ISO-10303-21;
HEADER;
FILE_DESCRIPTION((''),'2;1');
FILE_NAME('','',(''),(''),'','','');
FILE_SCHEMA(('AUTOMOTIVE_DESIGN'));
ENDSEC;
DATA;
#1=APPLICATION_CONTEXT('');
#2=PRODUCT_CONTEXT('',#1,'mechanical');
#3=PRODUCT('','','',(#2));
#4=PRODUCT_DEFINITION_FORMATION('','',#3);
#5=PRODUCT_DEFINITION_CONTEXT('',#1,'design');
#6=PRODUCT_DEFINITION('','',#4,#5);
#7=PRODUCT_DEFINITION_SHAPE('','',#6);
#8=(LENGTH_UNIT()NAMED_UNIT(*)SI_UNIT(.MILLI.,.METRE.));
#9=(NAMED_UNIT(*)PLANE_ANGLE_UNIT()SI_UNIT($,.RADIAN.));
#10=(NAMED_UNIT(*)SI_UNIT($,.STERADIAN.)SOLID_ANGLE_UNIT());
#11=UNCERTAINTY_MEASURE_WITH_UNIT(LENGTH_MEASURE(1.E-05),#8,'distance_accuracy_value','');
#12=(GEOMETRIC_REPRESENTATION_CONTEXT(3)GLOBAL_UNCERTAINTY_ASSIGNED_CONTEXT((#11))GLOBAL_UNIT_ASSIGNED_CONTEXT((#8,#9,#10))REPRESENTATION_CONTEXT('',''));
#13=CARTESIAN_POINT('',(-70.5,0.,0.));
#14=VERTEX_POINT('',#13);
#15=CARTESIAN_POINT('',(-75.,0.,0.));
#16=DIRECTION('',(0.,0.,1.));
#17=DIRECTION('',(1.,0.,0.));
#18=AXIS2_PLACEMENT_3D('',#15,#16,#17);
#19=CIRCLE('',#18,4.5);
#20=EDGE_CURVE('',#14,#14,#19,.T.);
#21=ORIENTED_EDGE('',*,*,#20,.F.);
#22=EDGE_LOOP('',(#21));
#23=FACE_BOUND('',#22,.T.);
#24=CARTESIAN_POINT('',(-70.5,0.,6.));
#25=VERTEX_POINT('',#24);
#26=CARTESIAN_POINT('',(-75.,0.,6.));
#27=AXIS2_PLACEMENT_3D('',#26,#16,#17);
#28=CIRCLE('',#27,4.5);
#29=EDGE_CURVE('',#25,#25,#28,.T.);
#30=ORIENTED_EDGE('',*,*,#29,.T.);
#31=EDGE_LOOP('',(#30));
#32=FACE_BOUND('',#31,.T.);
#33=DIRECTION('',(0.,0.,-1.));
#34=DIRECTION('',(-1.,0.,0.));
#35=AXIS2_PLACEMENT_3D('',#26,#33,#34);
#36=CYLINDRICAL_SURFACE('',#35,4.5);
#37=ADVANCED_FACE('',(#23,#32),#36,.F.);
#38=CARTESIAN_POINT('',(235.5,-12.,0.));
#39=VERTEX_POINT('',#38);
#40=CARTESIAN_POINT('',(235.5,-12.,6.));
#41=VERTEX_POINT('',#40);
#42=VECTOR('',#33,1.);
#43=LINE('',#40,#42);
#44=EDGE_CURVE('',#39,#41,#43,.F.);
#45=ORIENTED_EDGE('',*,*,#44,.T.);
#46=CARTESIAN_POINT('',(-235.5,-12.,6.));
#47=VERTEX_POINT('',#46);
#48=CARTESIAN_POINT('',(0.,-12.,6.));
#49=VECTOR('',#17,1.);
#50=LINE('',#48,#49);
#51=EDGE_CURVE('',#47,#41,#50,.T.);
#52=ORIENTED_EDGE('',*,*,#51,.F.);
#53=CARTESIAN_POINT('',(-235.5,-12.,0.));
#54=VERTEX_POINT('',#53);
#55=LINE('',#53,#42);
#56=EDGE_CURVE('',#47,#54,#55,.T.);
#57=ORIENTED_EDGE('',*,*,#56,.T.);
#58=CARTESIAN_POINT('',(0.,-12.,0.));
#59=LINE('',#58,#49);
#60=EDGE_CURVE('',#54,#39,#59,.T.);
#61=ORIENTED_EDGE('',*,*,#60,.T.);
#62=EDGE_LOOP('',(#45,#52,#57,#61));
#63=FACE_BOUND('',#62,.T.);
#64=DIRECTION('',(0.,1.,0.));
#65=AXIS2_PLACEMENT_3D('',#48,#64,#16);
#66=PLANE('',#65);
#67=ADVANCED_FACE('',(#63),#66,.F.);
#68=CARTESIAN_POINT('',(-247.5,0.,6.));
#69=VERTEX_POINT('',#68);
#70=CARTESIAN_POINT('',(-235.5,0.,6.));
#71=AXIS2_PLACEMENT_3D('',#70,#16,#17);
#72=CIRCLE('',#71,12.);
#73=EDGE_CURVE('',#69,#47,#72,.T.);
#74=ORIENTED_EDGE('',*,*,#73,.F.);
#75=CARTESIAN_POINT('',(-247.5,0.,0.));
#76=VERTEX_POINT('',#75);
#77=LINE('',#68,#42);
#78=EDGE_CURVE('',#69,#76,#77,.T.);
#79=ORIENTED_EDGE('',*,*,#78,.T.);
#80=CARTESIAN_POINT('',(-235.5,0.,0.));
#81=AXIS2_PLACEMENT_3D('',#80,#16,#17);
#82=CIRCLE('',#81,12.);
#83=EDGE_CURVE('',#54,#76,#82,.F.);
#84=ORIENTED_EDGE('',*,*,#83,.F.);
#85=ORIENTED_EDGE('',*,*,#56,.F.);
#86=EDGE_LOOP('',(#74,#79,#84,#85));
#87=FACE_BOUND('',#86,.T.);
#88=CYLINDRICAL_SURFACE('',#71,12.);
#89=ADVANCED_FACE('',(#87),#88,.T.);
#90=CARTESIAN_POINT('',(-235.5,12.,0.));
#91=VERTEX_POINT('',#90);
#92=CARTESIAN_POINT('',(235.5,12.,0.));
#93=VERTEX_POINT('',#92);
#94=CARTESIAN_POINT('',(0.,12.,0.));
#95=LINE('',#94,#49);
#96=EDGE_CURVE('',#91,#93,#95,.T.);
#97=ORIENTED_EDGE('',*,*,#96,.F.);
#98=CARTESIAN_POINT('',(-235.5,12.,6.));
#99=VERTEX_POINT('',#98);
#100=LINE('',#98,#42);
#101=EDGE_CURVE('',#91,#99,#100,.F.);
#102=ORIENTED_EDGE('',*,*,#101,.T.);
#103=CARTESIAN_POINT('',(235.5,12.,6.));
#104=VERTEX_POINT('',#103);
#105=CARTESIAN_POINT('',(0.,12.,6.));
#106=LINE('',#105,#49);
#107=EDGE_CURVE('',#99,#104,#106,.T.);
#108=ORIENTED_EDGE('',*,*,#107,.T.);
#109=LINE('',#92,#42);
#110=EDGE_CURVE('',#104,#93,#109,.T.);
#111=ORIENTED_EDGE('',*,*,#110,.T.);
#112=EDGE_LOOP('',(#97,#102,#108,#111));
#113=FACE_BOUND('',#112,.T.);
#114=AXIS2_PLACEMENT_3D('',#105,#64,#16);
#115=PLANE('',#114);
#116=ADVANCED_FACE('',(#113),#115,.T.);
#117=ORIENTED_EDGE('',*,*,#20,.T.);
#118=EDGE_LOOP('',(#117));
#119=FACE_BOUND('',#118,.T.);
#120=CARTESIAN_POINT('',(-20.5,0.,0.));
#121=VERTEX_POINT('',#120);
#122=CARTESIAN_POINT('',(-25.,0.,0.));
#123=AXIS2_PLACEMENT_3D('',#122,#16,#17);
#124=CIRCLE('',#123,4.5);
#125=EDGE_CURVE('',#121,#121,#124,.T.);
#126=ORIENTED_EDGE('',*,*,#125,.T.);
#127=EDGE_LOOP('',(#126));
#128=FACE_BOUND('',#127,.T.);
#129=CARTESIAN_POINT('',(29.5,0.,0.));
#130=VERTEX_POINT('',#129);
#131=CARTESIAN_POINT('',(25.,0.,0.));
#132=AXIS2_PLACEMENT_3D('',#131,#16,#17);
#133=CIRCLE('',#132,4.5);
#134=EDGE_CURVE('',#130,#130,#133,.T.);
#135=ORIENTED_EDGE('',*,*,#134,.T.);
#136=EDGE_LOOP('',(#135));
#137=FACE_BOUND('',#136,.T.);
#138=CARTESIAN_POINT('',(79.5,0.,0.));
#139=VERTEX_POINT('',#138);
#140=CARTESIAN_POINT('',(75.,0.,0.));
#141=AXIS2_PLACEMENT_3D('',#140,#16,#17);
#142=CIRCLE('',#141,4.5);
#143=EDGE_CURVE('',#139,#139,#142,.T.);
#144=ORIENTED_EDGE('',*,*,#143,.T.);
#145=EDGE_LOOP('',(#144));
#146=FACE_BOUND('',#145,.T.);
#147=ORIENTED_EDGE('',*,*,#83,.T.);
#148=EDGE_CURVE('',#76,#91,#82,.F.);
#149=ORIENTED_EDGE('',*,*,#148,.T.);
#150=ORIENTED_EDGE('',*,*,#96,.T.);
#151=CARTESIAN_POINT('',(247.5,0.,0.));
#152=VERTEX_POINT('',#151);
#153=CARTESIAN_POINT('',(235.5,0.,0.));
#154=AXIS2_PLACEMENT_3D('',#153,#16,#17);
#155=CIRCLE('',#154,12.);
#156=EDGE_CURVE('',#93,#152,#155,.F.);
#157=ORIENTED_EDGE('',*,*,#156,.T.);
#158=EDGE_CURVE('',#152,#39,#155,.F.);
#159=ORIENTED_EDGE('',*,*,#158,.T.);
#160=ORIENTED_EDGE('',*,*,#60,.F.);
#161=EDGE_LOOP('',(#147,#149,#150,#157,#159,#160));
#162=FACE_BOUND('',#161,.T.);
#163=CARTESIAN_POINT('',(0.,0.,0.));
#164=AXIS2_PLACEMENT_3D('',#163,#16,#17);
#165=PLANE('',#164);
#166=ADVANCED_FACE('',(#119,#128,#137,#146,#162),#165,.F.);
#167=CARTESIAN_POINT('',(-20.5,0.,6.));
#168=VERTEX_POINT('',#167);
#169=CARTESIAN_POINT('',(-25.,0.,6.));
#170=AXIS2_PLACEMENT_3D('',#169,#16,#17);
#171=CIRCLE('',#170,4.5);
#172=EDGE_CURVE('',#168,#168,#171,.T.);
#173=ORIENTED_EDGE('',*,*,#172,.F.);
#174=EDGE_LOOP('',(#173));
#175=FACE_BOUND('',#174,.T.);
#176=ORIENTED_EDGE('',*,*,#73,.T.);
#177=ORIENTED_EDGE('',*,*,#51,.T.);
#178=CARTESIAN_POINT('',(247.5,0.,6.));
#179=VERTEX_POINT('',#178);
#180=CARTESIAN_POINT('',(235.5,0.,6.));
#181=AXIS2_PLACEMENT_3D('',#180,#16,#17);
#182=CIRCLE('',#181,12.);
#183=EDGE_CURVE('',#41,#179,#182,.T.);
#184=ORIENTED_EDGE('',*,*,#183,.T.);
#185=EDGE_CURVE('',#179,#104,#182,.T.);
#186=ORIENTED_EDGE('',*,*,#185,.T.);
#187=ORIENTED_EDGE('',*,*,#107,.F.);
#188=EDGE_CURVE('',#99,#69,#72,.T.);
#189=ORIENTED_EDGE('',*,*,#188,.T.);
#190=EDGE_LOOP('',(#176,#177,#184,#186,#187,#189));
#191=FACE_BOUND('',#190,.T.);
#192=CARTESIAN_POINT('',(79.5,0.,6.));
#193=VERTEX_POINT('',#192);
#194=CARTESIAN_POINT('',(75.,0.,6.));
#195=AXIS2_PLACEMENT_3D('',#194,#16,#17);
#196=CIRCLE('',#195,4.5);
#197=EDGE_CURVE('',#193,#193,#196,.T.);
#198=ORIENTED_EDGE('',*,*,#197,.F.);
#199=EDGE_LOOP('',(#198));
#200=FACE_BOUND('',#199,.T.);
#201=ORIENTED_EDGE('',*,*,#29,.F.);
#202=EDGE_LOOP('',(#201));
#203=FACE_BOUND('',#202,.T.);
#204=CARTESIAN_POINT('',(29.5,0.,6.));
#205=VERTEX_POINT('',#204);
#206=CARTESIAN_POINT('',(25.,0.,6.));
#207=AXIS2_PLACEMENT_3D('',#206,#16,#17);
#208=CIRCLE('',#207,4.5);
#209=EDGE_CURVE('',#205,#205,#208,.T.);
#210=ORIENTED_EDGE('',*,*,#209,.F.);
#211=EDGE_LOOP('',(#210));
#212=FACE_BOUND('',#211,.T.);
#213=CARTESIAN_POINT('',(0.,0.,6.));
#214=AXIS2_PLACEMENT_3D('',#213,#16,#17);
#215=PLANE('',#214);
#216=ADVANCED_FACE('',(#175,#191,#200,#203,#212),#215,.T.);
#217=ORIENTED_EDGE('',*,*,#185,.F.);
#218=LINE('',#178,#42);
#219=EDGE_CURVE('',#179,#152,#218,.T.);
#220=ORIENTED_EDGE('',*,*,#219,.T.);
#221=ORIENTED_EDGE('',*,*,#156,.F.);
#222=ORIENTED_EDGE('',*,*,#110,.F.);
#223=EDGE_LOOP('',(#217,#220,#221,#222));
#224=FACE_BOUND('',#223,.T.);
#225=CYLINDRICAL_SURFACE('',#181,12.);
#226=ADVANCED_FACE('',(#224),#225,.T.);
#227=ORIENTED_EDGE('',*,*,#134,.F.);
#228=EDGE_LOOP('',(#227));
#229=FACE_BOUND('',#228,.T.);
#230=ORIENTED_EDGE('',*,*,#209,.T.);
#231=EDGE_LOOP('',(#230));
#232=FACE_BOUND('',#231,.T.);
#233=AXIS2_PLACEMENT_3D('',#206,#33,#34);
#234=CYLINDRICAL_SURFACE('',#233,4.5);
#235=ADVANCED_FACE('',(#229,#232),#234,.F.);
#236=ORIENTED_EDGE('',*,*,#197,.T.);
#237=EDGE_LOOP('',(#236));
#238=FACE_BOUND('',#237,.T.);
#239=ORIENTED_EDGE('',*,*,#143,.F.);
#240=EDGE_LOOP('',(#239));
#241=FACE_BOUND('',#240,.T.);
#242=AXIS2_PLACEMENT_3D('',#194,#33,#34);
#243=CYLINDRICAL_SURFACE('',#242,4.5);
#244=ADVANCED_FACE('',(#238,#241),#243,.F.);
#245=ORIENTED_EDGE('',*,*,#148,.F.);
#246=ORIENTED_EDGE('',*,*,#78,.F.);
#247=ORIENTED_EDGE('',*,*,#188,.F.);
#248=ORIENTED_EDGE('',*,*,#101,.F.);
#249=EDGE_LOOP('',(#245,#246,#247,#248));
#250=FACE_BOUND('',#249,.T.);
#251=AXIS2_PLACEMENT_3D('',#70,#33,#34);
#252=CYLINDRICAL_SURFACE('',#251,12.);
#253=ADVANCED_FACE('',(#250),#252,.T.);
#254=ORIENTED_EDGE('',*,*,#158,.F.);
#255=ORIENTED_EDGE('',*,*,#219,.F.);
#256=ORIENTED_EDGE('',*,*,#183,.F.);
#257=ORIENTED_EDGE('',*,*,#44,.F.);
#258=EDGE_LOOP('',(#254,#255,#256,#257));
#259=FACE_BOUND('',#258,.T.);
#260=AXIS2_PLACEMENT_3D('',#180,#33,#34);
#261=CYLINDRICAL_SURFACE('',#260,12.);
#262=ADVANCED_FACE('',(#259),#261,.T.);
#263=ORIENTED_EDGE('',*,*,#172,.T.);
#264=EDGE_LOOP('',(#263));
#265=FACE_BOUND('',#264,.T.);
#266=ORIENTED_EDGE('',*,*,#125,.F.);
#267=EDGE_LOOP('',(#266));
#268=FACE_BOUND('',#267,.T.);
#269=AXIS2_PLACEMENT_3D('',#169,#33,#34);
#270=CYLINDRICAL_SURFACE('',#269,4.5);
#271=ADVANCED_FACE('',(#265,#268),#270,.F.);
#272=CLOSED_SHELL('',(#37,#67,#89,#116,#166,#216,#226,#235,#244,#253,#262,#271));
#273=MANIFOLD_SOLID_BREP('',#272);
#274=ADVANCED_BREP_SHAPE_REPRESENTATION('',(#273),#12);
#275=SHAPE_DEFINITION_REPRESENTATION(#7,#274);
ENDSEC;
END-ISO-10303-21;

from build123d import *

# Parameters (mm, degrees)
SKETCH1_W           = 495
SKETCH1_H           = 24
SKETCH1_R           = 4.5
BOSS_EXTRUDE1_DEPTH = 6
FILLET2_R           = 12


with BuildPart() as part:
    # Sketch1 → Boss-Extrude1 (new body)
    with BuildSketch(Plane.XY):
        Rectangle(SKETCH1_W, SKETCH1_H)
        with Locations((75, 0)):
            Circle(SKETCH1_R, mode=Mode.SUBTRACT)
        with Locations((25, 0)):
            Circle(SKETCH1_R, mode=Mode.SUBTRACT)
        with Locations((-25, 0)):
            Circle(SKETCH1_R, mode=Mode.SUBTRACT)
        with Locations((-75, 0)):
            Circle(SKETCH1_R, mode=Mode.SUBTRACT)
    extrude(amount=BOSS_EXTRUDE1_DEPTH)

    # Fillet2
    fillet2_edges = [part.edges().sort_by_distance(p)[0] for p in [
        (-247.5, -12, 3),
        (-247.5, 12, 3),
        (247.5, 12, 3),
        (247.5, -12, 3),
    ]]
    fillet(fillet2_edges, radius=FILLET2_R - 0.0001)  # a hair under: the kernel refuses the full size


solid = part.part
